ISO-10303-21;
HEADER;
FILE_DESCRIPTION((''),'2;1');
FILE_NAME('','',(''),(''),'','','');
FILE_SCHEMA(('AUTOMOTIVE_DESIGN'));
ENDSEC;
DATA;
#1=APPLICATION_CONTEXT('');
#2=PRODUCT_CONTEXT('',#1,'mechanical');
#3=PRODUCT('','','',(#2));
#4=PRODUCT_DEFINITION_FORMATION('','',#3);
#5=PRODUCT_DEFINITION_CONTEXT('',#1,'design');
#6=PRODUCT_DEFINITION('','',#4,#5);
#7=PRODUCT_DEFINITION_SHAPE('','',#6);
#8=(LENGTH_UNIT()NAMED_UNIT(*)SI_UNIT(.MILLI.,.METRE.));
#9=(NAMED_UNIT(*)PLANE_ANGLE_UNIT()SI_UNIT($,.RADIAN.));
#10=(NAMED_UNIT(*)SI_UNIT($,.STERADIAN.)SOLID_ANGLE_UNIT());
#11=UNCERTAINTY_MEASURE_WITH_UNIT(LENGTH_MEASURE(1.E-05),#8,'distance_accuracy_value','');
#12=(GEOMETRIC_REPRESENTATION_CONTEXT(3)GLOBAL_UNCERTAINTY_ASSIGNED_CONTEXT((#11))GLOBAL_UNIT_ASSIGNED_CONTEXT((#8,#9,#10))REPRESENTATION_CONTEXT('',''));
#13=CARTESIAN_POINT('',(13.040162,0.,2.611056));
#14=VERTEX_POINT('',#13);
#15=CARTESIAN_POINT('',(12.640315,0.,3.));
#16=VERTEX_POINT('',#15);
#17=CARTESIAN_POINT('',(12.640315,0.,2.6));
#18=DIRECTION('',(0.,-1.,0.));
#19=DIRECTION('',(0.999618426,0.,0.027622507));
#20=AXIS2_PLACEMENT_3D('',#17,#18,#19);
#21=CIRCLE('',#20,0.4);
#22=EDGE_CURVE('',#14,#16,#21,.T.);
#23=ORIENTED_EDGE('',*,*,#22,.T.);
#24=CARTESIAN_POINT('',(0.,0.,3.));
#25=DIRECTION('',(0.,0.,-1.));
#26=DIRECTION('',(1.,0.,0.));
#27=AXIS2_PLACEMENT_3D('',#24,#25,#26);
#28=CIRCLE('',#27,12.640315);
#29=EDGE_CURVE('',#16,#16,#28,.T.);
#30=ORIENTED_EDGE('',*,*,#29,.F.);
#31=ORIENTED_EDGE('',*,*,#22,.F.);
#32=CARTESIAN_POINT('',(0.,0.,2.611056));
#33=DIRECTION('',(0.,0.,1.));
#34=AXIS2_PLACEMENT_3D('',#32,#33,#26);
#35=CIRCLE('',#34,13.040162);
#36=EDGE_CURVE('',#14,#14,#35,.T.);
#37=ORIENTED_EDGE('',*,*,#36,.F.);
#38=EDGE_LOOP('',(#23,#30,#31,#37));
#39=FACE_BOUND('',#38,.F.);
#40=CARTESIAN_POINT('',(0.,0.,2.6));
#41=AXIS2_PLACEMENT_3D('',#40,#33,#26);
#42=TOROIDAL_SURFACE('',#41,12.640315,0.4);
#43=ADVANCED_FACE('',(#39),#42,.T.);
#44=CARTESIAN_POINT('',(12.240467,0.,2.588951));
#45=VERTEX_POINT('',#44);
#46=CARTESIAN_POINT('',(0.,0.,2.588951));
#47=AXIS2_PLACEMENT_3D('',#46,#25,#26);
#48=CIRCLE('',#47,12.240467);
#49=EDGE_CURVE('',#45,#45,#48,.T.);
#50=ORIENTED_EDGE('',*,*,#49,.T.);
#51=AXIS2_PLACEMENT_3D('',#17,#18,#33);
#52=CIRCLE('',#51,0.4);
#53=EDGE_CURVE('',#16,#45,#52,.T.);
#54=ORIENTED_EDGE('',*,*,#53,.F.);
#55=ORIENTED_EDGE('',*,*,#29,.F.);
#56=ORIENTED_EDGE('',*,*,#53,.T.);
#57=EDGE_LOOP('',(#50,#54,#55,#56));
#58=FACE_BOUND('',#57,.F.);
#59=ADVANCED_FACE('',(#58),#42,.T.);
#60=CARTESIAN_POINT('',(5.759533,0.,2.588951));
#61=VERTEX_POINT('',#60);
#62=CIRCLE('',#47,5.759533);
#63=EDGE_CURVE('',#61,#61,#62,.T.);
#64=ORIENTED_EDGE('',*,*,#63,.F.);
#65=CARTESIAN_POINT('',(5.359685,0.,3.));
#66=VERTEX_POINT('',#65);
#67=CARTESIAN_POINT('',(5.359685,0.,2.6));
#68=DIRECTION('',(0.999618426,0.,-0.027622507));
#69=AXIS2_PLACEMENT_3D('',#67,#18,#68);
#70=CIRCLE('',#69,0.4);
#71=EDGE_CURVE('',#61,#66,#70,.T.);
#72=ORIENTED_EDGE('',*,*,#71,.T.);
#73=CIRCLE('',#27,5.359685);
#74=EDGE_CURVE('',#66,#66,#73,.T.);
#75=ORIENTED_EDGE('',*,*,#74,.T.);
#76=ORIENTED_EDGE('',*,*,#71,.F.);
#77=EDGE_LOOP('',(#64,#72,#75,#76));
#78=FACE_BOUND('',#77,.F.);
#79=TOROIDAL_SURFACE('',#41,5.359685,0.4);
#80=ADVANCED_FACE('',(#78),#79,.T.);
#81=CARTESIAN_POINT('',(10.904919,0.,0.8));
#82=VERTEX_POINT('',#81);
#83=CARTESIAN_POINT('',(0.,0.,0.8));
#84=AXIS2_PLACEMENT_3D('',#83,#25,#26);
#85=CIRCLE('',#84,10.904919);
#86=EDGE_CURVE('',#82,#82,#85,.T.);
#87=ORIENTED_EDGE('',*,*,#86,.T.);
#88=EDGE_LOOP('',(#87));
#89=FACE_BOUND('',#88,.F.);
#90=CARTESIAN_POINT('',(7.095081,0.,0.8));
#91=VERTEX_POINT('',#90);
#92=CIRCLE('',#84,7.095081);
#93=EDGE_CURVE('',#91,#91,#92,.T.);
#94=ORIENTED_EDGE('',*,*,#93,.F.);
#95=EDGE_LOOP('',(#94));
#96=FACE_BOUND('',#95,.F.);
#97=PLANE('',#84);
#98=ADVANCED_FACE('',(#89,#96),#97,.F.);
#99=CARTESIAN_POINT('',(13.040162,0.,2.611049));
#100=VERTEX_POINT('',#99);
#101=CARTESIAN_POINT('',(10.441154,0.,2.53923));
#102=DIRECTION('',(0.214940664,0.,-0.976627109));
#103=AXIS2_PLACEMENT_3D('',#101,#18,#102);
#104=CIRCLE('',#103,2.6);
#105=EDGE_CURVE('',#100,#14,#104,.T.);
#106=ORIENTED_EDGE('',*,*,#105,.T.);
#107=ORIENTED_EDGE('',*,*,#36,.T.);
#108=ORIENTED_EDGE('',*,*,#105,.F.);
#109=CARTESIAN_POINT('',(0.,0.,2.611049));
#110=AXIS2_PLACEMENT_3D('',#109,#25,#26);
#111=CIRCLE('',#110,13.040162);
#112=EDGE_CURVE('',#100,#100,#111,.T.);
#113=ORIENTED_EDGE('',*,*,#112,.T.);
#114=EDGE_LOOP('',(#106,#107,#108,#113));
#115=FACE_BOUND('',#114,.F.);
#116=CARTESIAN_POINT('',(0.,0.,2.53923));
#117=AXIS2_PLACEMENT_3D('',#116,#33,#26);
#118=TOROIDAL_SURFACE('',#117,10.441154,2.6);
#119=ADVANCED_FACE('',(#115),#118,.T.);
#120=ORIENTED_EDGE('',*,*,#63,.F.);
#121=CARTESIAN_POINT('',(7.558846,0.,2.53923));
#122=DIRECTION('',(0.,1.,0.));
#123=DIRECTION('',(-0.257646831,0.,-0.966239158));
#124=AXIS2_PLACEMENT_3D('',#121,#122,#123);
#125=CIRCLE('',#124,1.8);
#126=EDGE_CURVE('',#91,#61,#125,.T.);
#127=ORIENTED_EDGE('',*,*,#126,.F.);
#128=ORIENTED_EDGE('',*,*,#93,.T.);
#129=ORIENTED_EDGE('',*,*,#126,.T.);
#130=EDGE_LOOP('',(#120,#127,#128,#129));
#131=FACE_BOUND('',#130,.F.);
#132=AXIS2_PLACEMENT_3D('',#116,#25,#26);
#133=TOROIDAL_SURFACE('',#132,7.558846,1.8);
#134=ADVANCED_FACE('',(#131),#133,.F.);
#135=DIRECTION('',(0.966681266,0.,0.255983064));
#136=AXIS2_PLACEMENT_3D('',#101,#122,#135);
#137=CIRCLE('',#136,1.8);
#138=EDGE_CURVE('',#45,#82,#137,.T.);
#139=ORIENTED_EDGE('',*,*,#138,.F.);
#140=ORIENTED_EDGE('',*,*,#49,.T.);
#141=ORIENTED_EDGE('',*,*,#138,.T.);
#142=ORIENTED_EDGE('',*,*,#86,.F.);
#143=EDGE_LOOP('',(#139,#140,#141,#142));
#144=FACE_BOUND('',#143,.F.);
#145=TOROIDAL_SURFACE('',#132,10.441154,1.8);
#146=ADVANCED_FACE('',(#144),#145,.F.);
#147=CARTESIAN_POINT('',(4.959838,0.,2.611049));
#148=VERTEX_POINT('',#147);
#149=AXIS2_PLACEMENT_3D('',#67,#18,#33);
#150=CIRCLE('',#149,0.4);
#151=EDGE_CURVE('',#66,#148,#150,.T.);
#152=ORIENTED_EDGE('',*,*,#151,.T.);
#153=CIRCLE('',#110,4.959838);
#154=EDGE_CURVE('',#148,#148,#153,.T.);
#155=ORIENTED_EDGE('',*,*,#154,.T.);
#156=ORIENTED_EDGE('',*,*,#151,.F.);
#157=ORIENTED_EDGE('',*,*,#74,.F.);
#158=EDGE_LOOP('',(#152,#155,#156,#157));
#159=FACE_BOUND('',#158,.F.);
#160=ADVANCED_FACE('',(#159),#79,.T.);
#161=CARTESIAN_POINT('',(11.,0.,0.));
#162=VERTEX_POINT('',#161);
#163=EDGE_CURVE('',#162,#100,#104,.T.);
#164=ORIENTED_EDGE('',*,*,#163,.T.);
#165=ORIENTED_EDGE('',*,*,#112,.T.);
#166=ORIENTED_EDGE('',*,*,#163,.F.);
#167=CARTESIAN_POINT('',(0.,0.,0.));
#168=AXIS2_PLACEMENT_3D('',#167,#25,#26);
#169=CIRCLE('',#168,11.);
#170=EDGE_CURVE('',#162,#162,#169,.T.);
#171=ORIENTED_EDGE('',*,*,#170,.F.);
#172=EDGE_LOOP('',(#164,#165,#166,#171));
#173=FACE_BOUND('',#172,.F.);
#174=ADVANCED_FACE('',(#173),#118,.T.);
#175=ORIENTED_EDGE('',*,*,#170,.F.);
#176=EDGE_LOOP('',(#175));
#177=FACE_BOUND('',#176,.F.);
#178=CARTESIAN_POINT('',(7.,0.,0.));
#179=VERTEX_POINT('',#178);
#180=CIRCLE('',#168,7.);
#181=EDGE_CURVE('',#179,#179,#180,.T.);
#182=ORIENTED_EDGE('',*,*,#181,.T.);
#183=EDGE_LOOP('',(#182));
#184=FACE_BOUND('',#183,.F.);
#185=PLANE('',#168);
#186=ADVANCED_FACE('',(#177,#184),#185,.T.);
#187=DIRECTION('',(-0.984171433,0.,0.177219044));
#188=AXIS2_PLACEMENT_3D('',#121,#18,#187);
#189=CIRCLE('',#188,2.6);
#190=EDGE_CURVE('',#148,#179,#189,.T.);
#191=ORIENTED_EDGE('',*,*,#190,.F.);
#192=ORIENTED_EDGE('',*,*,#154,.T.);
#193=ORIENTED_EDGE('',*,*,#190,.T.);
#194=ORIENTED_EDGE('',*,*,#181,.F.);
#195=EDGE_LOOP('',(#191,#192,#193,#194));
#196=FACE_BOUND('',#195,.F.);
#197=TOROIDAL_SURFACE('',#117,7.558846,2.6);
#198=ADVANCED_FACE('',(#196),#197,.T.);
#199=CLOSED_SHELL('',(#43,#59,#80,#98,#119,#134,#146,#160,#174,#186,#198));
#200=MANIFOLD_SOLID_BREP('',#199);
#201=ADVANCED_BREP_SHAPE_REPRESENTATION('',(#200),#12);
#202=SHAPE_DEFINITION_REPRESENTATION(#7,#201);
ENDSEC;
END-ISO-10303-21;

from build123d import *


# Not quite as in the source:
# - a fillet or chamfer that OpenCascade refuses, or shapes differently, is made with other operations: its cross-section is extruded or revolved along the edge and cut away or added


with BuildPart() as f1:
    # F0 (on Front) → F1 (revolve)
    with BuildSketch(Plane.XZ):
        with BuildLine():
            ThreePointArc((5, 3), (5.3955149615, 1.0970099744), (7, 0))
            Line((7, 0), (11, 0))
            ThreePointArc((11, 0), (12.6044850385, 1.0970099744), (13, 3))
            Line((13, 3), (12.1811805528, 3))
            ThreePointArc((12.1811805528, 3), (11.9981299392, 1.6359991878), (10.9049185685, 0.8))
            Line((10.9049185685, 0.8), (7.0950814315, 0.8))
            ThreePointArc((7.0950814315, 0.8), (6.0018700608, 1.6359991878), (5.8188194472, 3))
            Line((5.8188194472, 3), (5, 3))
        make_face()
    revolve(axis=Axis((0, 0, -1.7576739192), (0, 0, -1)))

    # F2: fillet of radius 0.4 on 4 edges, made by hand

    # F2_s1 → F2_t2 (revolve, cut)
    with BuildSketch(Plane.XZ):
        with BuildLine():
            ThreePointArc((12.6403148098, 3), (12.3535922949, 2.8789089447), (12.2404674395, 2.5889509972))
            Line((12.2404674395, 2.5889509972), (12.2324704921, 2.5887300171))
            ThreePointArc((12.2324704921, 2.5887300171), (12.21480048, 2.7950490393), (12.1734471026, 2.9979521355))
            Line((12.1734471026, 2.9979521355), (12.1811805528, 3.008))
            Line((12.1811805528, 3.008), (12.6403148098, 3.008))
            Line((12.6403148098, 3.008), (12.6403148098, 3))
        make_face()
    revolve(axis=Axis((0, 0, 3), (0, 0, -1)), mode=Mode.SUBTRACT)

    # F2_s3 → F2_t4 (revolve, cut)
    with BuildSketch(Plane.XZ):
        with BuildLine():
            ThreePointArc((5.7595325605, 2.5889509972), (5.6464077051, 2.8789089447), (5.3596851902, 3))
            Line((5.3596851902, 3), (5.3596851902, 3.008))
            Line((5.3596851902, 3.008), (5.8188194472, 3.008))
            Line((5.8188194472, 3.008), (5.8265528974, 2.9979521355))
            ThreePointArc((5.8265528974, 2.9979521355), (5.78519952, 2.7950490393), (5.7675295079, 2.5887300171))
            Line((5.7675295079, 2.5887300171), (5.7595325605, 2.5889509972))
        make_face()
    revolve(axis=Axis((0, 0, 3), (0, 0, -1)), mode=Mode.SUBTRACT)

    # F2_s5 → F2_t6 (revolve, cut)
    with BuildSketch(Plane.XZ):
        with BuildLine():
            ThreePointArc((5.3596851902, 3), (5.0807762454, 2.8867225149), (4.9598378199, 2.6110490028))
            Line((4.9598378199, 2.6110490028), (4.9518408724, 2.6112699829))
            ThreePointArc((4.9518408724, 2.6112699829), (4.9646389685, 2.8071022728), (4.9921266285, 3.0014177524))
            Line((4.9921266285, 3.0014177524), (5, 3.008))
            Line((5, 3.008), (5.3596851902, 3.008))
            Line((5.3596851902, 3.008), (5.3596851902, 3))
        make_face()
    revolve(axis=Axis((0, 0, 3), (0, 0, -1)), mode=Mode.SUBTRACT)

    # F2_s7 → F2_t8 (revolve, cut)
    with BuildSketch(Plane.XZ):
        with BuildLine():
            ThreePointArc((13.0401621801, 2.6110490028), (12.9192237546, 2.8867225149), (12.6403148098, 3))
            Line((12.6403148098, 3), (12.6403148098, 3.008))
            Line((12.6403148098, 3.008), (13, 3.008))
            Line((13, 3.008), (13.0078733715, 3.0014177524))
            ThreePointArc((13.0078733715, 3.0014177524), (13.0353610315, 2.8071022728), (13.0481591276, 2.6112699829))
            Line((13.0481591276, 2.6112699829), (13.0401621801, 2.6110490028))
        make_face()
    revolve(axis=Axis((0, 0, 3), (0, 0, -1)), mode=Mode.SUBTRACT)


solid = f1.part
